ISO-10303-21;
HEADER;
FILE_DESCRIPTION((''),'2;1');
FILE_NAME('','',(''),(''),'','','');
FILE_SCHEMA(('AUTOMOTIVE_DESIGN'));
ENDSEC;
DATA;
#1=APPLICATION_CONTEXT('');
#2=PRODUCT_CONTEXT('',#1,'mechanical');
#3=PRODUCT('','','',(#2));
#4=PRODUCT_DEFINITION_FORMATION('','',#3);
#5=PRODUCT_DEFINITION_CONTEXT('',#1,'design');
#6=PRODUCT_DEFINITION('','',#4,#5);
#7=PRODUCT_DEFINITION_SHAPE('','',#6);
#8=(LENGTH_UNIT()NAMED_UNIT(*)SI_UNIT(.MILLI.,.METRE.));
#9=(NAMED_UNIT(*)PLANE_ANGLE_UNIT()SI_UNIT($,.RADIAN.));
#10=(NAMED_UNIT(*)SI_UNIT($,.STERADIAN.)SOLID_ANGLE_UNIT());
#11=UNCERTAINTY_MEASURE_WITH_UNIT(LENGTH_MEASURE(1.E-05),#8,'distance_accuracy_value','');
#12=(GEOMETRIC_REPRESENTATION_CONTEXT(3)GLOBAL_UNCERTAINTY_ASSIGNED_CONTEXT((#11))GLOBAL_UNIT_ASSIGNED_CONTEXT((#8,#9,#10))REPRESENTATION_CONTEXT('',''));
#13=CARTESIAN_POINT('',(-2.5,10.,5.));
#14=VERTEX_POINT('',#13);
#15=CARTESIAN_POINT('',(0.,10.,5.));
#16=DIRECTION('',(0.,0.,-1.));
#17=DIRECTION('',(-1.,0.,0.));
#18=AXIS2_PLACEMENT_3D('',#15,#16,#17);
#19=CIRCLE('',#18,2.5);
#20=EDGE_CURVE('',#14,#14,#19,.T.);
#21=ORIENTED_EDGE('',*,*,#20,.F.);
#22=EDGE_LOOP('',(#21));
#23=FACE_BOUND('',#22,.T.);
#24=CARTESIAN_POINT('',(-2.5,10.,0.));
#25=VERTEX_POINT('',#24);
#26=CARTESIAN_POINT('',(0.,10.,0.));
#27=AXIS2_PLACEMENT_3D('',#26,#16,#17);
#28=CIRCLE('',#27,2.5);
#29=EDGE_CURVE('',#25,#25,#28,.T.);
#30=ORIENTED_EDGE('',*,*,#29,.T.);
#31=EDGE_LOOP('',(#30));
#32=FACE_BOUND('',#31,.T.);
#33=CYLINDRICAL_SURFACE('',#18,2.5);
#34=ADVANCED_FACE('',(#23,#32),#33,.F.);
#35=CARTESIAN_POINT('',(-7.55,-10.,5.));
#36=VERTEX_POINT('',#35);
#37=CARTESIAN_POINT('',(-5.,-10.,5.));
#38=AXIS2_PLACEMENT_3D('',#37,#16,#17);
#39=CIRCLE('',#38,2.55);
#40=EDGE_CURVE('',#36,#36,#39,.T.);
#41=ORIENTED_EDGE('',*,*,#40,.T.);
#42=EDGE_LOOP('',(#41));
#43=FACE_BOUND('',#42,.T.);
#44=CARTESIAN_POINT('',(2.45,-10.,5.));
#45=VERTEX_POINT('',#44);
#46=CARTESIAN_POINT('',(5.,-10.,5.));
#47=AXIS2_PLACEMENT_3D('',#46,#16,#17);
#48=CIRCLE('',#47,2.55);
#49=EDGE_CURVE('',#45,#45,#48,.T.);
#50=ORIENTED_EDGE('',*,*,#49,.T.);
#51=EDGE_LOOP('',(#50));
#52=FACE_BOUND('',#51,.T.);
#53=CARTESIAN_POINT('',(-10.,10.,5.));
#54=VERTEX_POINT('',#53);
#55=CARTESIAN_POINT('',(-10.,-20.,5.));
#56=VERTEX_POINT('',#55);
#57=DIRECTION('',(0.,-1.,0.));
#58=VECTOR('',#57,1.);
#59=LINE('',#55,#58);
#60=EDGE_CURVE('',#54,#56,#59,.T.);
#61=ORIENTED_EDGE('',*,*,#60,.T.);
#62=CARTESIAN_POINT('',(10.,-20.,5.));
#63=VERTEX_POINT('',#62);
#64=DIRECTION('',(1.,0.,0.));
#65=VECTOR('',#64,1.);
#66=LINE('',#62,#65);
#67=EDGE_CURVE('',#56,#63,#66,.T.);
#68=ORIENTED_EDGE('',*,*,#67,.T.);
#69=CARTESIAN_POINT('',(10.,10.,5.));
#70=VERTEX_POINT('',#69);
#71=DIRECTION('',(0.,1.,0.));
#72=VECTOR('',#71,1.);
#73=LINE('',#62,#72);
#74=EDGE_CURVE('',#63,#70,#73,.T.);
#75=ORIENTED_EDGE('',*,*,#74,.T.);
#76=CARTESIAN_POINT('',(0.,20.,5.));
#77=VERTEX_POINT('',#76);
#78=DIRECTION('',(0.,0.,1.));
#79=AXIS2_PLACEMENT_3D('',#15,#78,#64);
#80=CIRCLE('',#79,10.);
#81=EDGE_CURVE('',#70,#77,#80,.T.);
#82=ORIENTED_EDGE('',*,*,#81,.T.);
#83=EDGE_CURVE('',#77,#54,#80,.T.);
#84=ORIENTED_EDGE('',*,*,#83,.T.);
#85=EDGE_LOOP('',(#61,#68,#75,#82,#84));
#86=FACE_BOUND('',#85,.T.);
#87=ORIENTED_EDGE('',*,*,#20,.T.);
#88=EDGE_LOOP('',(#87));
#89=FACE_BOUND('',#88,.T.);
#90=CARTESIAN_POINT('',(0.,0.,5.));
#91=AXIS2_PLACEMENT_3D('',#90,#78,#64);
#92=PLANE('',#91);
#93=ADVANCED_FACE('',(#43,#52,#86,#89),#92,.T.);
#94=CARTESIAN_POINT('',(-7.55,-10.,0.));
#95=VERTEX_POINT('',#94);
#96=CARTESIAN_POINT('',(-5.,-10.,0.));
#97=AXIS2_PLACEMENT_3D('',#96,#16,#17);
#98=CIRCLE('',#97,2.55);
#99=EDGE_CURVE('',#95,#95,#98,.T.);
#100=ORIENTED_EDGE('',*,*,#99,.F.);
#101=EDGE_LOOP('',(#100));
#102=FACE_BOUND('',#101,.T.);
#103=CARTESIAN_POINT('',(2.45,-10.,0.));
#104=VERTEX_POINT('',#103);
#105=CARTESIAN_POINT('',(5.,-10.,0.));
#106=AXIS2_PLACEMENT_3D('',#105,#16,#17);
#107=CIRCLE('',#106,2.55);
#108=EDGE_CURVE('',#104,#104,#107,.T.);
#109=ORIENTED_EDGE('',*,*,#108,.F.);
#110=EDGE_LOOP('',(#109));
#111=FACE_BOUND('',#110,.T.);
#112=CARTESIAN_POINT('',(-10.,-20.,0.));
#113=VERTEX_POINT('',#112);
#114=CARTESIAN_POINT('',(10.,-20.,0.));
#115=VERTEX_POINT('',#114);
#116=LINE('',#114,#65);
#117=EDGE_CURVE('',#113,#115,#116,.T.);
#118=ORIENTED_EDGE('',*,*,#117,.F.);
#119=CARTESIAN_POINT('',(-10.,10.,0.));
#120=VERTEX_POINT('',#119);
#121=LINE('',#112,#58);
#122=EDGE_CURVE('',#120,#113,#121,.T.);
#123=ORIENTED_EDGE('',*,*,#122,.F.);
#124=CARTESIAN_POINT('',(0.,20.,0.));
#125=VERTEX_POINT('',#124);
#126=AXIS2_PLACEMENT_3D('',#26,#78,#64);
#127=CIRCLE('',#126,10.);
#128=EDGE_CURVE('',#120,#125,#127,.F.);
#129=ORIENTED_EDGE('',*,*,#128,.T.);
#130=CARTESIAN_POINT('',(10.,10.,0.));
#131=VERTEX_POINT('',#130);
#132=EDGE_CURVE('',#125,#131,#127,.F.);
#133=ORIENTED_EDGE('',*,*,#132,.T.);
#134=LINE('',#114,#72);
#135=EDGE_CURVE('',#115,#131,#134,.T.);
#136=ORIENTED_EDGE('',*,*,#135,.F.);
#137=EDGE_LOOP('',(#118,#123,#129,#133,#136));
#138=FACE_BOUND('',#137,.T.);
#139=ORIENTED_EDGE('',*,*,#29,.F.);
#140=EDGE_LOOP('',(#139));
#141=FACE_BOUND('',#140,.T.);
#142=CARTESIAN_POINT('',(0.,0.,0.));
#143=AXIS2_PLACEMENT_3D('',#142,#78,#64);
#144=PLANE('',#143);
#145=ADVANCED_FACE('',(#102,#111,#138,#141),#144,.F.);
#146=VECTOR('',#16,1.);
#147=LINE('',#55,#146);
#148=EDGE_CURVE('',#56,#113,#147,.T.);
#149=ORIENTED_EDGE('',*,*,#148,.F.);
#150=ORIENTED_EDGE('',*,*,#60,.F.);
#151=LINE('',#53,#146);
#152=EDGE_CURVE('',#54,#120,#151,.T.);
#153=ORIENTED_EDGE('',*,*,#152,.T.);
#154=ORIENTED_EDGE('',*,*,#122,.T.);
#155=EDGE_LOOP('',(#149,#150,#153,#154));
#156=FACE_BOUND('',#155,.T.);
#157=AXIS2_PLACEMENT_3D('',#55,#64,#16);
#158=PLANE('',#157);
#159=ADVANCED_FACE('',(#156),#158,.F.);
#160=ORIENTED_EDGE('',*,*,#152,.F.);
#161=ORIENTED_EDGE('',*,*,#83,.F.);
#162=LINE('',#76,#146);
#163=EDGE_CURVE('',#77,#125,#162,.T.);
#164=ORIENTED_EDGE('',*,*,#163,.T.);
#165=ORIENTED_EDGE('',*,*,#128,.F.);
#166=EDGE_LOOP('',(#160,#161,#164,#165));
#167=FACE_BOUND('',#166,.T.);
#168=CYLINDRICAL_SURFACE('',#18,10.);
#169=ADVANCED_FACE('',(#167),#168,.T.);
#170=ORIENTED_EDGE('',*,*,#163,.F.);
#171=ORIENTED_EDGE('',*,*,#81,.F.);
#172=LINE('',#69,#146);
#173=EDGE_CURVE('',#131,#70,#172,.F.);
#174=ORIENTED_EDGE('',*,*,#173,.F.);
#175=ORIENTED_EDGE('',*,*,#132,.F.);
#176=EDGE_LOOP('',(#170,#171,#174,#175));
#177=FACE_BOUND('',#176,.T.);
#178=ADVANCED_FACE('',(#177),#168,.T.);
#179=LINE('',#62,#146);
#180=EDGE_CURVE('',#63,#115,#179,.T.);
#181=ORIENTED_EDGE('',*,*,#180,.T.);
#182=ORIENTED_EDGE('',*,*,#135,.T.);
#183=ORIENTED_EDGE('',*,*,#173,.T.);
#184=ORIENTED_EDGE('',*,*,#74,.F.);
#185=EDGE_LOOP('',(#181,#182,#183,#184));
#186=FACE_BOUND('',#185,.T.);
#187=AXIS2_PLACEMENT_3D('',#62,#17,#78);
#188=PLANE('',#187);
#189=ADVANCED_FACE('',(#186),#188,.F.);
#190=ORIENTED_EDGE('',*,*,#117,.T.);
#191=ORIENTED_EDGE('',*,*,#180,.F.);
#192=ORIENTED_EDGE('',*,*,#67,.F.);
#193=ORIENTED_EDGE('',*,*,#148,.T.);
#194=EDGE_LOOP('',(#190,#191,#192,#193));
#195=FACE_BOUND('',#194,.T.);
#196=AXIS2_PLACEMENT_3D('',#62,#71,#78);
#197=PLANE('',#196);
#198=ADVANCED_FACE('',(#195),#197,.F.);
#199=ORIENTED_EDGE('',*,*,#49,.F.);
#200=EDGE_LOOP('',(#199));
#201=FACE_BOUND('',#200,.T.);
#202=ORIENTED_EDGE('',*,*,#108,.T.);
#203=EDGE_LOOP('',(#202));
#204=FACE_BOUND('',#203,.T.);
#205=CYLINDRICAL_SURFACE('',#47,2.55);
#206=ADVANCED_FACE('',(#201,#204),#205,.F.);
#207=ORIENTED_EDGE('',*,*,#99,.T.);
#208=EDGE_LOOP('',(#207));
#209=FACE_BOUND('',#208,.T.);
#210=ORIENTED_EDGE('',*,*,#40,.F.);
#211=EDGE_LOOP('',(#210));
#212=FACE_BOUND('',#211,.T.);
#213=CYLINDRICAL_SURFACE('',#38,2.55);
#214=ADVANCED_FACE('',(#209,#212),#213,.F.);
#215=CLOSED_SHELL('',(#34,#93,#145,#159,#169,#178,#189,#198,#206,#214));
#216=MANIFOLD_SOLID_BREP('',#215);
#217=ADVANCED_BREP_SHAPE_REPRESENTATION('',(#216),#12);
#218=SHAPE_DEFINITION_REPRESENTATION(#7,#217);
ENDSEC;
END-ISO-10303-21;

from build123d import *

# Parameters (mm, degrees)
SKETCH1_W           = 20
SKETCH1_H           = 40
BOSS_EXTRUDE1_DEPTH = 5
FILLET2_R           = 10
SKETCH2_R           = 2.5
CUT_EXTRUDE1_DEPTH  = 23.912878475
SKETCH3_R           = 2.55
CUT_EXTRUDE2_DEPTH  = 5


with BuildPart() as part:
    # Sketch1 → Boss-Extrude1 (new body)
    with BuildSketch(Plane.XY):
        Rectangle(SKETCH1_W, SKETCH1_H)
    extrude(amount=BOSS_EXTRUDE1_DEPTH)

    # Fillet2
    fillet2_edges = [part.edges().sort_by_distance(p)[0] for p in [
        (-10, 20, 2.5),
        (10, 20, 2.5),
    ]]
    fillet(fillet2_edges, radius=FILLET2_R - 0.0001)  # a hair under: the kernel refuses the full size

    # Sketch2 → Cut-Extrude1 (cut, through all)
    with BuildSketch(Plane(origin=(0, 0, 0), x_dir=(-1, 0, 0), z_dir=(0, 0, -1))):
        with Locations((0, 10)):
            Circle(SKETCH2_R)
    extrude(amount=-CUT_EXTRUDE1_DEPTH, mode=Mode.SUBTRACT)

    # Sketch3 → Cut-Extrude2 (cut)
    with BuildSketch(Plane(origin=(0, 0, 0), x_dir=(-1, 0, 0), z_dir=(0, 0, -1))):
        with Locations((-5, -10)):
            Circle(SKETCH3_R)
        with Locations((5, -10)):
            Circle(SKETCH3_R)
    extrude(amount=-CUT_EXTRUDE2_DEPTH, mode=Mode.SUBTRACT)


solid = part.part
